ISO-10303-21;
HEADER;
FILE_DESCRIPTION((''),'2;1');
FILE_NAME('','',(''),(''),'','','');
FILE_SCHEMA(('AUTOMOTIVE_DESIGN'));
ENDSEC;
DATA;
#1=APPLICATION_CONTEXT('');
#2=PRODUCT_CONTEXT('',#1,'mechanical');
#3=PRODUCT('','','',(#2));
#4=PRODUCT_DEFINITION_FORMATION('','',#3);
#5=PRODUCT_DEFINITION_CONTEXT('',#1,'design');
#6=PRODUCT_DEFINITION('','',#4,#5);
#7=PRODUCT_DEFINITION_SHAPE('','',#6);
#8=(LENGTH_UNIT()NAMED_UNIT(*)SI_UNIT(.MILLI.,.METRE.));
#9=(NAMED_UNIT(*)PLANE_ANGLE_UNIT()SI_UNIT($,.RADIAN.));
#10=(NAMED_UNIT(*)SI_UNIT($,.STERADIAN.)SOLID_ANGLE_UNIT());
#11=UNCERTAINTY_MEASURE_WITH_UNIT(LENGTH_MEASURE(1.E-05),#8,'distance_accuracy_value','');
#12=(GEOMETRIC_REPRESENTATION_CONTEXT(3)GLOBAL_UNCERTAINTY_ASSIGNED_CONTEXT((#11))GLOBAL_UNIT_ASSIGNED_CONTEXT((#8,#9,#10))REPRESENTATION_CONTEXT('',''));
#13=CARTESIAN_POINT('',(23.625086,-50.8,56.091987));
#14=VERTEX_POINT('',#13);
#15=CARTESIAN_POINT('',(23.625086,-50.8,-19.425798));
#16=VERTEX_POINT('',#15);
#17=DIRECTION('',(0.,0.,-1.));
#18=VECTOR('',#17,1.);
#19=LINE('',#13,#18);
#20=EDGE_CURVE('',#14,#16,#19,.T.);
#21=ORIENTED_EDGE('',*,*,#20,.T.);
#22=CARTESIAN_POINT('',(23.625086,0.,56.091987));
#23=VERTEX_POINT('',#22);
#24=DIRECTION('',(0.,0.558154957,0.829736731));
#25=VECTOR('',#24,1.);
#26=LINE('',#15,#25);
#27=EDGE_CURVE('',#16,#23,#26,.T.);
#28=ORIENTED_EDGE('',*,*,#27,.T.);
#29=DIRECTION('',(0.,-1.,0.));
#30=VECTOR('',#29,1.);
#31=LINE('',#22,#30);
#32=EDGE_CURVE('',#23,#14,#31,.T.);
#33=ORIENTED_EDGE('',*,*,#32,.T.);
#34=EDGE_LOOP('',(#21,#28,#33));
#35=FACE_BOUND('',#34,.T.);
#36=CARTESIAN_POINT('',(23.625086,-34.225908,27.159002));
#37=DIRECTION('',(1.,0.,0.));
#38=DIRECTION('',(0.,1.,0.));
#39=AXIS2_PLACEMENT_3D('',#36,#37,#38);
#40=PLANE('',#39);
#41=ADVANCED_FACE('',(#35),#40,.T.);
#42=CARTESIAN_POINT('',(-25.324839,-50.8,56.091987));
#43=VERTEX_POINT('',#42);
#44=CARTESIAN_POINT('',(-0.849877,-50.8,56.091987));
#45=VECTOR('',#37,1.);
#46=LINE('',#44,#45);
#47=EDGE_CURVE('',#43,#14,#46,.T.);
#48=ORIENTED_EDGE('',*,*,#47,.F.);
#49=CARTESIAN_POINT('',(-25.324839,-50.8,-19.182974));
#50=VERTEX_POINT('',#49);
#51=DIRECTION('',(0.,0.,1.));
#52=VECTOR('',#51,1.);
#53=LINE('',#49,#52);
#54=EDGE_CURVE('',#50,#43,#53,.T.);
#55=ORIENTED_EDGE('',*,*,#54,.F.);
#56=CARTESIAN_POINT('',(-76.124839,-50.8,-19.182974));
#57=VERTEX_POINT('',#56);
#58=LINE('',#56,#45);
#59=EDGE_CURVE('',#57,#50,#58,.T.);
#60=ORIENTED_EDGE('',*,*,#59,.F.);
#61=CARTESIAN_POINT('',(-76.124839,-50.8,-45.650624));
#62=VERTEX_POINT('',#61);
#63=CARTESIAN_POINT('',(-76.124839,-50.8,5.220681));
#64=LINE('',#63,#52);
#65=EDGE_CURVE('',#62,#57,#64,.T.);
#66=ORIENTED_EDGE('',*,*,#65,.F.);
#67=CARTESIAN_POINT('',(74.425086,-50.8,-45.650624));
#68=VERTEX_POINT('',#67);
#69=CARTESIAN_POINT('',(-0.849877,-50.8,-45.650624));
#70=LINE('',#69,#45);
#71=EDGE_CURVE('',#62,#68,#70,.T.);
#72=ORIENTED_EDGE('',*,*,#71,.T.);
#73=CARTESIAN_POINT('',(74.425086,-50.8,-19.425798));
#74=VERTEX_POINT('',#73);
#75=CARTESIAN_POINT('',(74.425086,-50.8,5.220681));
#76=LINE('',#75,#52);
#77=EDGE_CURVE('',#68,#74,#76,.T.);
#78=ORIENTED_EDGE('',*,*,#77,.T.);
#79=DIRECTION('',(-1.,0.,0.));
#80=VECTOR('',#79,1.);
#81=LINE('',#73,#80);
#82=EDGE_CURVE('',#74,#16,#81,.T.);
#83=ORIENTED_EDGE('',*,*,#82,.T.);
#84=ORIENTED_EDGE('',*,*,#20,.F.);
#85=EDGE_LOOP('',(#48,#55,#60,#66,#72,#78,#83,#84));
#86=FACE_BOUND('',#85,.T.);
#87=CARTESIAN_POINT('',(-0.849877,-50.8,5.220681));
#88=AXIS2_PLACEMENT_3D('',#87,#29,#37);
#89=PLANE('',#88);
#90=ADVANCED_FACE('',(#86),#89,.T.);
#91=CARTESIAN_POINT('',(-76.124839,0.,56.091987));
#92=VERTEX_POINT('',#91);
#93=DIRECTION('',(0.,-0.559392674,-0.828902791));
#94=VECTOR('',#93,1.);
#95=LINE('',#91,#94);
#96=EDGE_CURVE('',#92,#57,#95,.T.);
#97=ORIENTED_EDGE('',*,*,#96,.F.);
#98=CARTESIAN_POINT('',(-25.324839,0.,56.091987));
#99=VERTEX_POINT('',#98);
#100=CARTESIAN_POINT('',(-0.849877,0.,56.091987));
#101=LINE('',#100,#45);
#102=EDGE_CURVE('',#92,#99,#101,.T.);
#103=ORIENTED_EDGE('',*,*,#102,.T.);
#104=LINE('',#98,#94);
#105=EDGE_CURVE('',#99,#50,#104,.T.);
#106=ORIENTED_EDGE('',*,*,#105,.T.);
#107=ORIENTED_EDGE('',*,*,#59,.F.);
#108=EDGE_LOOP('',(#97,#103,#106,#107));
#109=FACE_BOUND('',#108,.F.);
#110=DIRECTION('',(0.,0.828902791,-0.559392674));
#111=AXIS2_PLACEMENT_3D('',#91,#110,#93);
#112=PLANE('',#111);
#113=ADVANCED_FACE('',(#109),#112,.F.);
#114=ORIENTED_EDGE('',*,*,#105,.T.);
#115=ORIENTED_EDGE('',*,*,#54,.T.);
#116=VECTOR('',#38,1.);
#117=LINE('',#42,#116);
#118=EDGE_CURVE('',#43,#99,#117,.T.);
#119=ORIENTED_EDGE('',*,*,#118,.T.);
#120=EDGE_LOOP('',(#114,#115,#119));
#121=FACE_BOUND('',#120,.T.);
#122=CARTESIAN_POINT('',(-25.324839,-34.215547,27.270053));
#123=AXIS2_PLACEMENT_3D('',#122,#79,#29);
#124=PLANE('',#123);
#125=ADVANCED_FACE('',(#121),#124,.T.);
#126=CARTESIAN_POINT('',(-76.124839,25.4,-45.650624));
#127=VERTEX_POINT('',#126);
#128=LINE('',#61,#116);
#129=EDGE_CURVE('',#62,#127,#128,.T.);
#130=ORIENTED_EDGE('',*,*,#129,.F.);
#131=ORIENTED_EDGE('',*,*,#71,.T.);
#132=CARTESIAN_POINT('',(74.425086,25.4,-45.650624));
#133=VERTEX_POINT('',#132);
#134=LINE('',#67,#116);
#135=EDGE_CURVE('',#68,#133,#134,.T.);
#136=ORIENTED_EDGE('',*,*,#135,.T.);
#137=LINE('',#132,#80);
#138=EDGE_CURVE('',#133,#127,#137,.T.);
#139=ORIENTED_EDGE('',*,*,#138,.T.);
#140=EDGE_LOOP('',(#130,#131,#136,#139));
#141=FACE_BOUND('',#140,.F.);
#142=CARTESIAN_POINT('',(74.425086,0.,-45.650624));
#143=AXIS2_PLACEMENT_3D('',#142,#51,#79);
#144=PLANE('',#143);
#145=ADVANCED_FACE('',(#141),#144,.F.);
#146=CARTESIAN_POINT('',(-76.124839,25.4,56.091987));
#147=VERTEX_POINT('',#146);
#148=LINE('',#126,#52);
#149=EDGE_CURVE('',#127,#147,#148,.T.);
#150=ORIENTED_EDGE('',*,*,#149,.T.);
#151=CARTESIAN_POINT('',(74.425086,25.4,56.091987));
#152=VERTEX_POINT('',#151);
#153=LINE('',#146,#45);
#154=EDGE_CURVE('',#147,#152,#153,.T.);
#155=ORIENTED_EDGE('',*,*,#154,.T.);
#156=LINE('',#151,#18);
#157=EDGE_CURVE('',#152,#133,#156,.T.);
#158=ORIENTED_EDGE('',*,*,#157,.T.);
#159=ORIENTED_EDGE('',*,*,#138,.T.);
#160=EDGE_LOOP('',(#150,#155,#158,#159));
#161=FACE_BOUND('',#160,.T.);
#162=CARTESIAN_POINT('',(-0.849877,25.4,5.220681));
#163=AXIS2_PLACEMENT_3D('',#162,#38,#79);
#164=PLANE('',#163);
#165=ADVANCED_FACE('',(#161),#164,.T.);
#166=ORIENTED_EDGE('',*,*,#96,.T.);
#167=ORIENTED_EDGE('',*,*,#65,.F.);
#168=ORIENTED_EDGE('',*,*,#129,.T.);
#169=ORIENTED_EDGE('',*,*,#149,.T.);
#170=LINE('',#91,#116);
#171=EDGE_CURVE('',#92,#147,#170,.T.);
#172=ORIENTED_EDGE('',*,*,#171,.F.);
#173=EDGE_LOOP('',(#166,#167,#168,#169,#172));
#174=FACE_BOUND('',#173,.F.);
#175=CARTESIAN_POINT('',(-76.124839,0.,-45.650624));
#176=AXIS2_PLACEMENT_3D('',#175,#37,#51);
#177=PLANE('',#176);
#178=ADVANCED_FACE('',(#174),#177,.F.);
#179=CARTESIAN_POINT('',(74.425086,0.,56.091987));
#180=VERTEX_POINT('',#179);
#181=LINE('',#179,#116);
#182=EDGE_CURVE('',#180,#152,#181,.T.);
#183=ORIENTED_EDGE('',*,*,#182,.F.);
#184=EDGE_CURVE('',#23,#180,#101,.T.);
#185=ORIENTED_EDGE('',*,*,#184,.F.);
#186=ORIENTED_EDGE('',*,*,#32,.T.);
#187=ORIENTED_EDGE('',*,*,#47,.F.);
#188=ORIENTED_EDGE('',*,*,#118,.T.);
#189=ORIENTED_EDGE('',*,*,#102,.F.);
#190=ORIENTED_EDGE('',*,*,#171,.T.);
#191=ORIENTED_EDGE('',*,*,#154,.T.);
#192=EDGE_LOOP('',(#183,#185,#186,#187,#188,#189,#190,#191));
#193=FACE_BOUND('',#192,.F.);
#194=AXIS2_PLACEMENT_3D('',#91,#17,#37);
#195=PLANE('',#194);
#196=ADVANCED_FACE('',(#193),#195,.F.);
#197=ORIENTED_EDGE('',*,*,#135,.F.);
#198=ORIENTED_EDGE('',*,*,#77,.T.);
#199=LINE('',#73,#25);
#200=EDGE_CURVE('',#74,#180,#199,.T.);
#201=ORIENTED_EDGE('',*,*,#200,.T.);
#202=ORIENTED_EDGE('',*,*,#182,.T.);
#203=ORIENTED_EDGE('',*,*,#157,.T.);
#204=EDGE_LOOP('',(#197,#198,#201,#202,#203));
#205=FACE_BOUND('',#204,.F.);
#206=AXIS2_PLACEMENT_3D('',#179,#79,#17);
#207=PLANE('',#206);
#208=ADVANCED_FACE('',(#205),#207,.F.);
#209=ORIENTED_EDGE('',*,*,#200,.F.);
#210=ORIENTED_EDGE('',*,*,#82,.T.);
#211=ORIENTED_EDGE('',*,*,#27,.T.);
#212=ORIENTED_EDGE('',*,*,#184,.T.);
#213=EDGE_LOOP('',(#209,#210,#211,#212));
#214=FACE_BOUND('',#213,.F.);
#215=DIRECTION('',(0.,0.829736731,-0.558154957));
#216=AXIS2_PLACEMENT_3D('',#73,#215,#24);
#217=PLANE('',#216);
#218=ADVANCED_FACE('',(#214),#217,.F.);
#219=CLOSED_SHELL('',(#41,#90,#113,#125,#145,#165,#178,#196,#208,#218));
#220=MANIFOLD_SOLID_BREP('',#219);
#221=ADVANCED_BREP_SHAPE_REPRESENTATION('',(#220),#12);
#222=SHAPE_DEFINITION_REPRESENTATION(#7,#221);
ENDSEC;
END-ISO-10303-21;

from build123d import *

# Parameters (mm, degrees)
F0_W     = 150.5499258637
F0_H     = 101.7426103354
F1_DEPTH = 50.8
F3_DEPTH = 50.8
F5_DEPTH = 50.8
F7_DEPTH = 25.4


with BuildPart() as f1:
    # F0 (on Front) → F1 (new body)
    with BuildSketch(Plane.XZ):
        with Locations((-0.8498765528, 5.2206814289)):
            Rectangle(F0_W, F0_H)
    extrude(amount=F1_DEPTH)

    # F2 (on face) → F3 (cut)
    with BuildSketch(Plane(origin=(-76.1248394847, 0, 0), x_dir=(0, -1, 0), z_dir=(-1, 0, 0))):
        Polygon((0, 56.0919865966), (50.8, -19.1829744726), (50.8, 56.0919865966), align=None)
    extrude(amount=-F3_DEPTH, mode=Mode.SUBTRACT)

    # F4 (on face) → F5 (cut)
    with BuildSketch(Plane.YZ.offset(74.4250863791)):
        Polygon((-50.8, 56.0919865966), (-50.8, -19.4257982075), (0, 56.0919865966), align=None)
    extrude(amount=-F5_DEPTH, mode=Mode.SUBTRACT)

    # F6 (on face) → F7 (join)
    with BuildSketch(Plane(origin=(0, 0, 0), x_dir=(-1, 0, 0), z_dir=(0, 1, 0))):
        Polygon((-23.6250863791, 56.0919865966), (-74.4250863791, 56.0919865966), (-74.4250863791, -45.6506237388), (76.1248394847, -45.6506237388), (76.1248394847, 56.0919865966), (25.3248394847, 56.0919865966), align=None)
    extrude(amount=F7_DEPTH)


solid = f1.part
